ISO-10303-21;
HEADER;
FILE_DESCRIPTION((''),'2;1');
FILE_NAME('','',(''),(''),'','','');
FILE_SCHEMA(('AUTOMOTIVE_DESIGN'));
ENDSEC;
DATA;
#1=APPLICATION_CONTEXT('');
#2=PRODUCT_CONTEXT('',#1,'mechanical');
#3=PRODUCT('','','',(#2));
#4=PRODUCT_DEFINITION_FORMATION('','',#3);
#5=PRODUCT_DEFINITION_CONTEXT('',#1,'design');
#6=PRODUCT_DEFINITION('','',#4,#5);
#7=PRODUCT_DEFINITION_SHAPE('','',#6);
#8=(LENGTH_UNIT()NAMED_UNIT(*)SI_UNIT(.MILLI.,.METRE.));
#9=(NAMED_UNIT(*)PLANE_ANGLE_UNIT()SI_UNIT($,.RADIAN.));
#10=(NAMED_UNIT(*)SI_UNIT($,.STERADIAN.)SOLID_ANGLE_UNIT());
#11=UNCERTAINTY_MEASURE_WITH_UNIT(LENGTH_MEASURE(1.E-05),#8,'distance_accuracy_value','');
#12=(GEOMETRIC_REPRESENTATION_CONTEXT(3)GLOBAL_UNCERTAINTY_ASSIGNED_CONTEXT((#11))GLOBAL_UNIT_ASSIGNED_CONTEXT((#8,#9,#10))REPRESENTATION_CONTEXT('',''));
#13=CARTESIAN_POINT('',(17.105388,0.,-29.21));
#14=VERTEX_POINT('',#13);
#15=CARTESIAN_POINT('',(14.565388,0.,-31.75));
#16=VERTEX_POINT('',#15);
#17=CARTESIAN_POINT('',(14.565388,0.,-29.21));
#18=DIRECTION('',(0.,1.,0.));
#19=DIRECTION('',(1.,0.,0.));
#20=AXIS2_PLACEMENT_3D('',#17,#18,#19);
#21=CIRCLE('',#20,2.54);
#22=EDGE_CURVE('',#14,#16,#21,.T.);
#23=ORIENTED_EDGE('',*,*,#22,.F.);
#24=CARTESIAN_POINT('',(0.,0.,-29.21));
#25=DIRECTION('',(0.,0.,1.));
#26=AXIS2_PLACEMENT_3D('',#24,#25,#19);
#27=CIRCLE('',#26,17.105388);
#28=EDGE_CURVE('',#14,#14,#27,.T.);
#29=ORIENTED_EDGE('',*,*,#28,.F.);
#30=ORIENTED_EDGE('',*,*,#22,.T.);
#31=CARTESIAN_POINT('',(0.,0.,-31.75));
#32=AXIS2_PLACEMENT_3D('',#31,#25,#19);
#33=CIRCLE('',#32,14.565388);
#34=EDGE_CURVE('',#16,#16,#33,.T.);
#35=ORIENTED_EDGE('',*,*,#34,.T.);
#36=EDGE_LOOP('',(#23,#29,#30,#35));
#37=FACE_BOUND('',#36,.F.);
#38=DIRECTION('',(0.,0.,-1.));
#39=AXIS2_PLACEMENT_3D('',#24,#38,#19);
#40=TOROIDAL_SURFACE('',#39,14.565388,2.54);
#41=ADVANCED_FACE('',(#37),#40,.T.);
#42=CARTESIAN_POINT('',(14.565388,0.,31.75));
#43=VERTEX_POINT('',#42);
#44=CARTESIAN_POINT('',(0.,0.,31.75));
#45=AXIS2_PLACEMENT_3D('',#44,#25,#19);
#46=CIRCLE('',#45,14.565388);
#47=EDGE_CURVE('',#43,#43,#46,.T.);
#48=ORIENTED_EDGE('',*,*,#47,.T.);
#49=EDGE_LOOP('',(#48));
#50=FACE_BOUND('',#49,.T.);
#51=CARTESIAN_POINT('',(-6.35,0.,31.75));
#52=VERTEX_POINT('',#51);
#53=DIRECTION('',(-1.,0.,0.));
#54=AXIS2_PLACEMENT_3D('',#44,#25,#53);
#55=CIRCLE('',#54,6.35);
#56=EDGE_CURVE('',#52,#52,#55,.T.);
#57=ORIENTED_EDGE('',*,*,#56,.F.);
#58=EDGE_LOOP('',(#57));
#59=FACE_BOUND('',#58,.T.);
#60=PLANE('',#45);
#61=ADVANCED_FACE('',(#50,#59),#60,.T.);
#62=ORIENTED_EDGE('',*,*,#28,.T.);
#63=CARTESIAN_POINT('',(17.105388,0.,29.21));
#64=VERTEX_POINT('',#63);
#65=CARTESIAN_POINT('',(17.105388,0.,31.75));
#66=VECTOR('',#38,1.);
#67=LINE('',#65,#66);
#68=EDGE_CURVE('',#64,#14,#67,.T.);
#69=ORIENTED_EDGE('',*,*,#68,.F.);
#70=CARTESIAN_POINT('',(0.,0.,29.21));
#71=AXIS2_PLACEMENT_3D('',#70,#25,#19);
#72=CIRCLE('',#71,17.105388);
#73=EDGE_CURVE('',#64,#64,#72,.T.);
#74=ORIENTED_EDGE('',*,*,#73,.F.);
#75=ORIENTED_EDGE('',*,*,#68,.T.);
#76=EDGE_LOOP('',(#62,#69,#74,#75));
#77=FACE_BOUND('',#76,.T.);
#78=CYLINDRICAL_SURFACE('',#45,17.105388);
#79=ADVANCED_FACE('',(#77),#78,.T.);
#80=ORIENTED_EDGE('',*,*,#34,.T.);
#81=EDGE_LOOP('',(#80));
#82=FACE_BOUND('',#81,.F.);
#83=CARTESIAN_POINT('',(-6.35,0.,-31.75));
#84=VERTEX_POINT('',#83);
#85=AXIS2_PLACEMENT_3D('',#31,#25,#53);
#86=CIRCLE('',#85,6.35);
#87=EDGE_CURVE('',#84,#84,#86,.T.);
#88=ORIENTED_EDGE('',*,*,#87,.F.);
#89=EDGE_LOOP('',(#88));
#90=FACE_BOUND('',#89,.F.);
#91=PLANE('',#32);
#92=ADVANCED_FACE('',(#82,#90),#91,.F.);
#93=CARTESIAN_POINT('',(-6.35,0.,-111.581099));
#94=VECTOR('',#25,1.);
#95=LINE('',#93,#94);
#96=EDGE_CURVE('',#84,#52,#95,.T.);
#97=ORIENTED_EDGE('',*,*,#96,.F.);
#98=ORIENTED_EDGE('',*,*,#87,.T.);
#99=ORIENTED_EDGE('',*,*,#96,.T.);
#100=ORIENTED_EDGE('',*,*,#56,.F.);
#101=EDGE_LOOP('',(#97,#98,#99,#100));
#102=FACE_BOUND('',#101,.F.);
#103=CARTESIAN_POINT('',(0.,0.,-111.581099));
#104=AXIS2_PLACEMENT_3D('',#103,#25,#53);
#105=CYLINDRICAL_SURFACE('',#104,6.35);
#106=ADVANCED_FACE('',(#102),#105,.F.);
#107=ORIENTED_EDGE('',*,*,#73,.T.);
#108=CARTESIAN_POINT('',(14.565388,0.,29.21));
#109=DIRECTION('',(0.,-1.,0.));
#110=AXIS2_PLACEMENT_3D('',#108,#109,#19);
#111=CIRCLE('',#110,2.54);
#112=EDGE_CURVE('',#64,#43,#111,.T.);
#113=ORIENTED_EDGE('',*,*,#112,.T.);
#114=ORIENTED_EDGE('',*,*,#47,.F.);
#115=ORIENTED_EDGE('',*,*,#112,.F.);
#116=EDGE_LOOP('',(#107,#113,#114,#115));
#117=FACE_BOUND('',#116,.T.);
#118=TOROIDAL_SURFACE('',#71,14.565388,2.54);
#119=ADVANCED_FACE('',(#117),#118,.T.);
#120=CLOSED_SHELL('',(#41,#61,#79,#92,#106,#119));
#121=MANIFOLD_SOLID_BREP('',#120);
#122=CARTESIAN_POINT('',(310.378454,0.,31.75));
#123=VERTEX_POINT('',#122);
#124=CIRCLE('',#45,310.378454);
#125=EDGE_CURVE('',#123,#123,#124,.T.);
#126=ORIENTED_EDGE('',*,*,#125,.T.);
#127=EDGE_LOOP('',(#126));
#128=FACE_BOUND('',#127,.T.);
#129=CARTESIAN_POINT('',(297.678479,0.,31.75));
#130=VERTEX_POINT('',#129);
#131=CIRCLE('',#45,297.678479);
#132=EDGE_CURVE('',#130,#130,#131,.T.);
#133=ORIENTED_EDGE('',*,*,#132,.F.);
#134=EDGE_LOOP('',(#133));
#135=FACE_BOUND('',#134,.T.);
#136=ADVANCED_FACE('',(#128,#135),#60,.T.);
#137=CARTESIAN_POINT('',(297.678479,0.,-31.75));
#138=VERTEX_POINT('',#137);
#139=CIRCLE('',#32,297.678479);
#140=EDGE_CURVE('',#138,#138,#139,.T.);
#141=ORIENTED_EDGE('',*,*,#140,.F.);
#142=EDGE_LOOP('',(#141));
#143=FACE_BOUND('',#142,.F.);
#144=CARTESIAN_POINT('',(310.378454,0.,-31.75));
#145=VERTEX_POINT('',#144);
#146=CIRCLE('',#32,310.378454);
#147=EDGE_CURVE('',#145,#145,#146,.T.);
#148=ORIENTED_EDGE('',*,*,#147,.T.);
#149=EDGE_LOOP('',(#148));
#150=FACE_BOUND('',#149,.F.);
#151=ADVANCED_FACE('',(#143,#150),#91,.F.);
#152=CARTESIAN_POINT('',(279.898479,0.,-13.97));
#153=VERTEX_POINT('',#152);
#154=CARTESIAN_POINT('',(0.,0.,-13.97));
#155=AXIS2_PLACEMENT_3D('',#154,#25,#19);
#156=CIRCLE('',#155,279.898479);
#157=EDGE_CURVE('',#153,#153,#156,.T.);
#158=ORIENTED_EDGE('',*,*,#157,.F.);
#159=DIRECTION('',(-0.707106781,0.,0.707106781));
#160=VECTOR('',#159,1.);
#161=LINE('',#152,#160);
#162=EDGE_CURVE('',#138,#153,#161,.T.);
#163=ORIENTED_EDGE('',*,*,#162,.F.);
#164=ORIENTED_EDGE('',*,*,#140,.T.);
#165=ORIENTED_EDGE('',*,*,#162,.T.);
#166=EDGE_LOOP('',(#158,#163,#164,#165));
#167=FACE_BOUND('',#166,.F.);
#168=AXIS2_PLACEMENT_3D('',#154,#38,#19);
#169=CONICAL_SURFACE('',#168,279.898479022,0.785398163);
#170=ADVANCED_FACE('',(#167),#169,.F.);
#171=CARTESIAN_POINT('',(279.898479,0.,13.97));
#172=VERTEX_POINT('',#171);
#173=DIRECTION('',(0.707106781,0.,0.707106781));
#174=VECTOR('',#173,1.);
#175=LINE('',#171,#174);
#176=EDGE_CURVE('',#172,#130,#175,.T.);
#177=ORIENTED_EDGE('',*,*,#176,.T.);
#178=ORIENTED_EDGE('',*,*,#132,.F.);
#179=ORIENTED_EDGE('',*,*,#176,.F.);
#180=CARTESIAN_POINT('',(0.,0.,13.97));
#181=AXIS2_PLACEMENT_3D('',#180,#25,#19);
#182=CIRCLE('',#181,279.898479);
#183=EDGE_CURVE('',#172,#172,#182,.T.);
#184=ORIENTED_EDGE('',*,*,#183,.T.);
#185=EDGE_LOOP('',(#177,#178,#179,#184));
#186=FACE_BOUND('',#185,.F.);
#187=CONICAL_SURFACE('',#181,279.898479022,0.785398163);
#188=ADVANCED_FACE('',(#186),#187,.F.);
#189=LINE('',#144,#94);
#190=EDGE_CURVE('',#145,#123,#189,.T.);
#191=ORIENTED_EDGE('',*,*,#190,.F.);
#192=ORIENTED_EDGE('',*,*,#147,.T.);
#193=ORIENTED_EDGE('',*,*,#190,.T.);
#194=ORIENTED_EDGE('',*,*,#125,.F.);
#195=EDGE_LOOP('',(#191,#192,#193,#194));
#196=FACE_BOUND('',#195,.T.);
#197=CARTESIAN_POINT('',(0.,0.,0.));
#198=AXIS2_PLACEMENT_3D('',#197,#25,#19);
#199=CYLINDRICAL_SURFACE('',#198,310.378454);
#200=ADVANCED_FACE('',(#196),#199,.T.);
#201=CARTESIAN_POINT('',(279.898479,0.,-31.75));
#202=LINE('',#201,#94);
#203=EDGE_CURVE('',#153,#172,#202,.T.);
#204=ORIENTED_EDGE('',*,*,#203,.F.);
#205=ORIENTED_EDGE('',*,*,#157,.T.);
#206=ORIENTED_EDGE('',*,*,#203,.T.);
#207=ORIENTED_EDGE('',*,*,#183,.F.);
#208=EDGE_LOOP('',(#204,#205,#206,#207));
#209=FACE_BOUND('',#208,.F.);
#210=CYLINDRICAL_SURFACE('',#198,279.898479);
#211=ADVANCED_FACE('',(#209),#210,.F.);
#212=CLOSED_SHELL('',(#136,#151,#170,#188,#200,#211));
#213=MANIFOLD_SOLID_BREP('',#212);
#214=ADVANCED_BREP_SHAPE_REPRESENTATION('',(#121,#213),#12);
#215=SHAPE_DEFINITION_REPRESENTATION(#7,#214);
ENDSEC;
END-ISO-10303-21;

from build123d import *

# Parameters (mm, degrees)
F0_R     = 310.378453622
F1_DEPTH = 31.75
F3_T     = -30.4799746
F2_R     = 17.1053876609
F4_DEPTH = 63.5
F5_R     = 2.54
F9_SIZE  = 17.78
F11_D    = 12.7


# Not quite as in the source:
# - a feature of the source that left no trace in its solid (it failed there, or was rolled back) is left out
# - the program builds the solid bodies; features that only make, move or delete a surface that nothing else refers to are left out


with BuildPart() as f1:
    # F0 (on Top) → F1 (new body, symmetric)
    with BuildSketch(Plane.XY):
        Circle(F0_R)
    extrude(amount=F1_DEPTH, both=True)

    # F3
    f3_openings = [f1.faces().sort_by_distance(p)[0] for p in [
        (0, 0, 31.75),
        (0, 0, -31.75),
    ]]
    offset(amount=F3_T, openings=f3_openings)

    # F9
    f9_edges = [f1.edges().sort_by_distance(p)[0] for p in [
        (-279.898479, 0, -31.75),
        (-279.898479, 0, 31.75),
    ]]
    chamfer(f9_edges, length=F9_SIZE)


with BuildPart() as f4:
    # F2 (on face) → F4 (new body)
    with BuildSketch(Plane.XY.offset(31.75)):
        Circle(F2_R)
    extrude(amount=-F4_DEPTH)

    # F5
    f5_edges = [f4.edges().sort_by_distance(p)[0] for p in [
        (17.105388, 0, 0),
        (-17.105388, 0, 31.75),
        (-17.105388, 0, -31.75),
    ]]
    fillet(f5_edges, radius=F5_R)

    # F11 (through all)
    with Locations(Plane(origin=(0, 0, -31.75), x_dir=(1, 0, 0), z_dir=(0, 0, -1))):
        with Locations((0, 0)):
            Hole(F11_D / 2)


solid = Compound([f1.part, f4.part])
